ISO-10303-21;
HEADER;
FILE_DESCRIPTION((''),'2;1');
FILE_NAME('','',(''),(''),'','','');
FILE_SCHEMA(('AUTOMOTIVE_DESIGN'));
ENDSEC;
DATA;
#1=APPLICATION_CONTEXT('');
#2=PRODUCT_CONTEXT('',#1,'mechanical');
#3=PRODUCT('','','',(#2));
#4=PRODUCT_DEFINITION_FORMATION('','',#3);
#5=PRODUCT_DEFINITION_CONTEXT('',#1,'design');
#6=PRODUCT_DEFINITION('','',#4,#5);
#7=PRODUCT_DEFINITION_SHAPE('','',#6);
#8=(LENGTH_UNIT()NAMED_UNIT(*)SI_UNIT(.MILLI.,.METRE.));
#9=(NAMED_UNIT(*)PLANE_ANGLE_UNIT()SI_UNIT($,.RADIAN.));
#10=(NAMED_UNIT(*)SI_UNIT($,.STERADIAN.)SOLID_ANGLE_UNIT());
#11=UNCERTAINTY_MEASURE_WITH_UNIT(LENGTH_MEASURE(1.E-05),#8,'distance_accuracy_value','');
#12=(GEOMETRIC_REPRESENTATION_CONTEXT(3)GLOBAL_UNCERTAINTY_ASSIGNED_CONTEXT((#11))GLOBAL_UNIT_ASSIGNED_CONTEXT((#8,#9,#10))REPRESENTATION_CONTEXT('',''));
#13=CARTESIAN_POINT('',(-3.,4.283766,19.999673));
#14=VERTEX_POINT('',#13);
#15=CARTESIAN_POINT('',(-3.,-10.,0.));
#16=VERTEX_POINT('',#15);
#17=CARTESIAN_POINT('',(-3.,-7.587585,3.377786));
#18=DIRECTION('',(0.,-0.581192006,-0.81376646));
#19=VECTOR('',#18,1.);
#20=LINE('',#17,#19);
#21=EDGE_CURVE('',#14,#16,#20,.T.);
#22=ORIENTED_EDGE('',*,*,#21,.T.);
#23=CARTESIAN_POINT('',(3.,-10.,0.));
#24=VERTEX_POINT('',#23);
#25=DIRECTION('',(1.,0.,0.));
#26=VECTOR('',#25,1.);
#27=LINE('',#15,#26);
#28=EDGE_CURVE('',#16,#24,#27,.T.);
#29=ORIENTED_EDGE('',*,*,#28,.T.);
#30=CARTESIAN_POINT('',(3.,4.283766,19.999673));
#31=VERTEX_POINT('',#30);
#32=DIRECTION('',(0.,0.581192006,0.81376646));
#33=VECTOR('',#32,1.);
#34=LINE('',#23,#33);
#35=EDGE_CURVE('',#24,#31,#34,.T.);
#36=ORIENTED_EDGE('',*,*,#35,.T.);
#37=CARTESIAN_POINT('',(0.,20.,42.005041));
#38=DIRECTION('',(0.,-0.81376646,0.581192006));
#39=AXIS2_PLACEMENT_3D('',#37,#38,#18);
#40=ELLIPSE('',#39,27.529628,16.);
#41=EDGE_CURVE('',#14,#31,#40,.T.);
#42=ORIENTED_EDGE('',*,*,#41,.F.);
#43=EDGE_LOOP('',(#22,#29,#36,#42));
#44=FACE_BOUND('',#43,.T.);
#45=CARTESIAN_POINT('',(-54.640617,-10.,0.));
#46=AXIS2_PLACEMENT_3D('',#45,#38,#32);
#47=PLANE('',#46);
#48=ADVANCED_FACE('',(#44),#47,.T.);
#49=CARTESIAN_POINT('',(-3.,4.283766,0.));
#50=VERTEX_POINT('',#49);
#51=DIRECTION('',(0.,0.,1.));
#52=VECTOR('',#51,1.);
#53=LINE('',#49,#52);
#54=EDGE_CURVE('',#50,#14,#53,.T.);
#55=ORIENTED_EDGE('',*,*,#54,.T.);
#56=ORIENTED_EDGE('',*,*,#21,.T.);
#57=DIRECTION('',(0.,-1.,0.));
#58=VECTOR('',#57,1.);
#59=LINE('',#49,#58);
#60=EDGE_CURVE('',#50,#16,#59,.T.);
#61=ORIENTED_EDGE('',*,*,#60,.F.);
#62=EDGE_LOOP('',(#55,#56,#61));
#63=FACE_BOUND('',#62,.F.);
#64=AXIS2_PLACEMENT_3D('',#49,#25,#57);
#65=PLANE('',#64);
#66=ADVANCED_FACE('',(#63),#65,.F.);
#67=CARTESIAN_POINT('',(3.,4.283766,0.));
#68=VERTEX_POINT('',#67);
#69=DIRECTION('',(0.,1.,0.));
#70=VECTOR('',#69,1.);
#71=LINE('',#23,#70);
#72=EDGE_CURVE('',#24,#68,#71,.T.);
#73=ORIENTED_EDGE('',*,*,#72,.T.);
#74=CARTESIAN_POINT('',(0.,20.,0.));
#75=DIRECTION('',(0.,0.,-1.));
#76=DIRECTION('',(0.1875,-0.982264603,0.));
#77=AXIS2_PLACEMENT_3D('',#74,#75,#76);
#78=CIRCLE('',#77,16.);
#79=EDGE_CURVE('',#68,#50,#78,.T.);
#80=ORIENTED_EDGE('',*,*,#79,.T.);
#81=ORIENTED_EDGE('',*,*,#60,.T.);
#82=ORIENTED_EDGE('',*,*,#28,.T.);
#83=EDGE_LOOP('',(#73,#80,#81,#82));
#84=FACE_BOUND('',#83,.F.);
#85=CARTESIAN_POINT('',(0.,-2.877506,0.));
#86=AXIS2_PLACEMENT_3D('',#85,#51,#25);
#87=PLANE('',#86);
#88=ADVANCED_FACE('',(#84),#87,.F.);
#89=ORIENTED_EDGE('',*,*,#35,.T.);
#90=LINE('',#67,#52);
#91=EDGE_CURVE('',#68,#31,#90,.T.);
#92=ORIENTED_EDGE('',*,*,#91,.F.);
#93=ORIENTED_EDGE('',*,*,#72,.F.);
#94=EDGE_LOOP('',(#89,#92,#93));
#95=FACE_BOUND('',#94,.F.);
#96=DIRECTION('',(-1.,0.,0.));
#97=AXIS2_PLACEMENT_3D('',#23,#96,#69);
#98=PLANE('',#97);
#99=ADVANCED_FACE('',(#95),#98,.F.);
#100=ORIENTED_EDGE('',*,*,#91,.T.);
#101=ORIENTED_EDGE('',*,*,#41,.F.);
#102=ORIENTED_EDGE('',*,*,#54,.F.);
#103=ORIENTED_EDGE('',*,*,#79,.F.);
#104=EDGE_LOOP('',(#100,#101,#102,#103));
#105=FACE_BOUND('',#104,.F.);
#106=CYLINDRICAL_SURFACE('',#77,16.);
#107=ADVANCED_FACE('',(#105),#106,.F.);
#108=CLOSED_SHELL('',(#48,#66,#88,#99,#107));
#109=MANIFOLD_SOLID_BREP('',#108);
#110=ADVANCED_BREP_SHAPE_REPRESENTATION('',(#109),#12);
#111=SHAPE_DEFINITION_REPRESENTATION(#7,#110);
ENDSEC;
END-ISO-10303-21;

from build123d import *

# Parameters (mm, degrees)
F1_DEPTH    = 20
F2_T1_DEPTH = 109.2812333793


# Not quite as in the source:
# - a fillet or chamfer that OpenCascade refuses, or shapes differently, is made with other operations: its cross-section is extruded or revolved along the edge and cut away or added


with BuildPart() as f1:
    # F0 (on Top) → F1 (new body)
    with BuildSketch(Plane.XY):
        with BuildLine():
            Line((-3, -10), (3, -10))
            Line((3, -10), (3, 4.2837663545))
            ThreePointArc((3, 4.2837663545), (0, 4), (-3, 4.2837663545))
            Line((-3, 4.2837663545), (-3, -10))
        make_face()
    extrude(amount=F1_DEPTH)

    # F2: chamfer of 20 x 14.284 on 1 edges, made by hand

    # F2_s2 → F2_t1 (cut)
    with BuildSketch(Plane.YZ.offset(-54.6406166896)):
        Polygon((-10, 0), (4.284, 20), (-10, 20), align=None)
    extrude(amount=F2_T1_DEPTH, mode=Mode.SUBTRACT)


solid = f1.part
